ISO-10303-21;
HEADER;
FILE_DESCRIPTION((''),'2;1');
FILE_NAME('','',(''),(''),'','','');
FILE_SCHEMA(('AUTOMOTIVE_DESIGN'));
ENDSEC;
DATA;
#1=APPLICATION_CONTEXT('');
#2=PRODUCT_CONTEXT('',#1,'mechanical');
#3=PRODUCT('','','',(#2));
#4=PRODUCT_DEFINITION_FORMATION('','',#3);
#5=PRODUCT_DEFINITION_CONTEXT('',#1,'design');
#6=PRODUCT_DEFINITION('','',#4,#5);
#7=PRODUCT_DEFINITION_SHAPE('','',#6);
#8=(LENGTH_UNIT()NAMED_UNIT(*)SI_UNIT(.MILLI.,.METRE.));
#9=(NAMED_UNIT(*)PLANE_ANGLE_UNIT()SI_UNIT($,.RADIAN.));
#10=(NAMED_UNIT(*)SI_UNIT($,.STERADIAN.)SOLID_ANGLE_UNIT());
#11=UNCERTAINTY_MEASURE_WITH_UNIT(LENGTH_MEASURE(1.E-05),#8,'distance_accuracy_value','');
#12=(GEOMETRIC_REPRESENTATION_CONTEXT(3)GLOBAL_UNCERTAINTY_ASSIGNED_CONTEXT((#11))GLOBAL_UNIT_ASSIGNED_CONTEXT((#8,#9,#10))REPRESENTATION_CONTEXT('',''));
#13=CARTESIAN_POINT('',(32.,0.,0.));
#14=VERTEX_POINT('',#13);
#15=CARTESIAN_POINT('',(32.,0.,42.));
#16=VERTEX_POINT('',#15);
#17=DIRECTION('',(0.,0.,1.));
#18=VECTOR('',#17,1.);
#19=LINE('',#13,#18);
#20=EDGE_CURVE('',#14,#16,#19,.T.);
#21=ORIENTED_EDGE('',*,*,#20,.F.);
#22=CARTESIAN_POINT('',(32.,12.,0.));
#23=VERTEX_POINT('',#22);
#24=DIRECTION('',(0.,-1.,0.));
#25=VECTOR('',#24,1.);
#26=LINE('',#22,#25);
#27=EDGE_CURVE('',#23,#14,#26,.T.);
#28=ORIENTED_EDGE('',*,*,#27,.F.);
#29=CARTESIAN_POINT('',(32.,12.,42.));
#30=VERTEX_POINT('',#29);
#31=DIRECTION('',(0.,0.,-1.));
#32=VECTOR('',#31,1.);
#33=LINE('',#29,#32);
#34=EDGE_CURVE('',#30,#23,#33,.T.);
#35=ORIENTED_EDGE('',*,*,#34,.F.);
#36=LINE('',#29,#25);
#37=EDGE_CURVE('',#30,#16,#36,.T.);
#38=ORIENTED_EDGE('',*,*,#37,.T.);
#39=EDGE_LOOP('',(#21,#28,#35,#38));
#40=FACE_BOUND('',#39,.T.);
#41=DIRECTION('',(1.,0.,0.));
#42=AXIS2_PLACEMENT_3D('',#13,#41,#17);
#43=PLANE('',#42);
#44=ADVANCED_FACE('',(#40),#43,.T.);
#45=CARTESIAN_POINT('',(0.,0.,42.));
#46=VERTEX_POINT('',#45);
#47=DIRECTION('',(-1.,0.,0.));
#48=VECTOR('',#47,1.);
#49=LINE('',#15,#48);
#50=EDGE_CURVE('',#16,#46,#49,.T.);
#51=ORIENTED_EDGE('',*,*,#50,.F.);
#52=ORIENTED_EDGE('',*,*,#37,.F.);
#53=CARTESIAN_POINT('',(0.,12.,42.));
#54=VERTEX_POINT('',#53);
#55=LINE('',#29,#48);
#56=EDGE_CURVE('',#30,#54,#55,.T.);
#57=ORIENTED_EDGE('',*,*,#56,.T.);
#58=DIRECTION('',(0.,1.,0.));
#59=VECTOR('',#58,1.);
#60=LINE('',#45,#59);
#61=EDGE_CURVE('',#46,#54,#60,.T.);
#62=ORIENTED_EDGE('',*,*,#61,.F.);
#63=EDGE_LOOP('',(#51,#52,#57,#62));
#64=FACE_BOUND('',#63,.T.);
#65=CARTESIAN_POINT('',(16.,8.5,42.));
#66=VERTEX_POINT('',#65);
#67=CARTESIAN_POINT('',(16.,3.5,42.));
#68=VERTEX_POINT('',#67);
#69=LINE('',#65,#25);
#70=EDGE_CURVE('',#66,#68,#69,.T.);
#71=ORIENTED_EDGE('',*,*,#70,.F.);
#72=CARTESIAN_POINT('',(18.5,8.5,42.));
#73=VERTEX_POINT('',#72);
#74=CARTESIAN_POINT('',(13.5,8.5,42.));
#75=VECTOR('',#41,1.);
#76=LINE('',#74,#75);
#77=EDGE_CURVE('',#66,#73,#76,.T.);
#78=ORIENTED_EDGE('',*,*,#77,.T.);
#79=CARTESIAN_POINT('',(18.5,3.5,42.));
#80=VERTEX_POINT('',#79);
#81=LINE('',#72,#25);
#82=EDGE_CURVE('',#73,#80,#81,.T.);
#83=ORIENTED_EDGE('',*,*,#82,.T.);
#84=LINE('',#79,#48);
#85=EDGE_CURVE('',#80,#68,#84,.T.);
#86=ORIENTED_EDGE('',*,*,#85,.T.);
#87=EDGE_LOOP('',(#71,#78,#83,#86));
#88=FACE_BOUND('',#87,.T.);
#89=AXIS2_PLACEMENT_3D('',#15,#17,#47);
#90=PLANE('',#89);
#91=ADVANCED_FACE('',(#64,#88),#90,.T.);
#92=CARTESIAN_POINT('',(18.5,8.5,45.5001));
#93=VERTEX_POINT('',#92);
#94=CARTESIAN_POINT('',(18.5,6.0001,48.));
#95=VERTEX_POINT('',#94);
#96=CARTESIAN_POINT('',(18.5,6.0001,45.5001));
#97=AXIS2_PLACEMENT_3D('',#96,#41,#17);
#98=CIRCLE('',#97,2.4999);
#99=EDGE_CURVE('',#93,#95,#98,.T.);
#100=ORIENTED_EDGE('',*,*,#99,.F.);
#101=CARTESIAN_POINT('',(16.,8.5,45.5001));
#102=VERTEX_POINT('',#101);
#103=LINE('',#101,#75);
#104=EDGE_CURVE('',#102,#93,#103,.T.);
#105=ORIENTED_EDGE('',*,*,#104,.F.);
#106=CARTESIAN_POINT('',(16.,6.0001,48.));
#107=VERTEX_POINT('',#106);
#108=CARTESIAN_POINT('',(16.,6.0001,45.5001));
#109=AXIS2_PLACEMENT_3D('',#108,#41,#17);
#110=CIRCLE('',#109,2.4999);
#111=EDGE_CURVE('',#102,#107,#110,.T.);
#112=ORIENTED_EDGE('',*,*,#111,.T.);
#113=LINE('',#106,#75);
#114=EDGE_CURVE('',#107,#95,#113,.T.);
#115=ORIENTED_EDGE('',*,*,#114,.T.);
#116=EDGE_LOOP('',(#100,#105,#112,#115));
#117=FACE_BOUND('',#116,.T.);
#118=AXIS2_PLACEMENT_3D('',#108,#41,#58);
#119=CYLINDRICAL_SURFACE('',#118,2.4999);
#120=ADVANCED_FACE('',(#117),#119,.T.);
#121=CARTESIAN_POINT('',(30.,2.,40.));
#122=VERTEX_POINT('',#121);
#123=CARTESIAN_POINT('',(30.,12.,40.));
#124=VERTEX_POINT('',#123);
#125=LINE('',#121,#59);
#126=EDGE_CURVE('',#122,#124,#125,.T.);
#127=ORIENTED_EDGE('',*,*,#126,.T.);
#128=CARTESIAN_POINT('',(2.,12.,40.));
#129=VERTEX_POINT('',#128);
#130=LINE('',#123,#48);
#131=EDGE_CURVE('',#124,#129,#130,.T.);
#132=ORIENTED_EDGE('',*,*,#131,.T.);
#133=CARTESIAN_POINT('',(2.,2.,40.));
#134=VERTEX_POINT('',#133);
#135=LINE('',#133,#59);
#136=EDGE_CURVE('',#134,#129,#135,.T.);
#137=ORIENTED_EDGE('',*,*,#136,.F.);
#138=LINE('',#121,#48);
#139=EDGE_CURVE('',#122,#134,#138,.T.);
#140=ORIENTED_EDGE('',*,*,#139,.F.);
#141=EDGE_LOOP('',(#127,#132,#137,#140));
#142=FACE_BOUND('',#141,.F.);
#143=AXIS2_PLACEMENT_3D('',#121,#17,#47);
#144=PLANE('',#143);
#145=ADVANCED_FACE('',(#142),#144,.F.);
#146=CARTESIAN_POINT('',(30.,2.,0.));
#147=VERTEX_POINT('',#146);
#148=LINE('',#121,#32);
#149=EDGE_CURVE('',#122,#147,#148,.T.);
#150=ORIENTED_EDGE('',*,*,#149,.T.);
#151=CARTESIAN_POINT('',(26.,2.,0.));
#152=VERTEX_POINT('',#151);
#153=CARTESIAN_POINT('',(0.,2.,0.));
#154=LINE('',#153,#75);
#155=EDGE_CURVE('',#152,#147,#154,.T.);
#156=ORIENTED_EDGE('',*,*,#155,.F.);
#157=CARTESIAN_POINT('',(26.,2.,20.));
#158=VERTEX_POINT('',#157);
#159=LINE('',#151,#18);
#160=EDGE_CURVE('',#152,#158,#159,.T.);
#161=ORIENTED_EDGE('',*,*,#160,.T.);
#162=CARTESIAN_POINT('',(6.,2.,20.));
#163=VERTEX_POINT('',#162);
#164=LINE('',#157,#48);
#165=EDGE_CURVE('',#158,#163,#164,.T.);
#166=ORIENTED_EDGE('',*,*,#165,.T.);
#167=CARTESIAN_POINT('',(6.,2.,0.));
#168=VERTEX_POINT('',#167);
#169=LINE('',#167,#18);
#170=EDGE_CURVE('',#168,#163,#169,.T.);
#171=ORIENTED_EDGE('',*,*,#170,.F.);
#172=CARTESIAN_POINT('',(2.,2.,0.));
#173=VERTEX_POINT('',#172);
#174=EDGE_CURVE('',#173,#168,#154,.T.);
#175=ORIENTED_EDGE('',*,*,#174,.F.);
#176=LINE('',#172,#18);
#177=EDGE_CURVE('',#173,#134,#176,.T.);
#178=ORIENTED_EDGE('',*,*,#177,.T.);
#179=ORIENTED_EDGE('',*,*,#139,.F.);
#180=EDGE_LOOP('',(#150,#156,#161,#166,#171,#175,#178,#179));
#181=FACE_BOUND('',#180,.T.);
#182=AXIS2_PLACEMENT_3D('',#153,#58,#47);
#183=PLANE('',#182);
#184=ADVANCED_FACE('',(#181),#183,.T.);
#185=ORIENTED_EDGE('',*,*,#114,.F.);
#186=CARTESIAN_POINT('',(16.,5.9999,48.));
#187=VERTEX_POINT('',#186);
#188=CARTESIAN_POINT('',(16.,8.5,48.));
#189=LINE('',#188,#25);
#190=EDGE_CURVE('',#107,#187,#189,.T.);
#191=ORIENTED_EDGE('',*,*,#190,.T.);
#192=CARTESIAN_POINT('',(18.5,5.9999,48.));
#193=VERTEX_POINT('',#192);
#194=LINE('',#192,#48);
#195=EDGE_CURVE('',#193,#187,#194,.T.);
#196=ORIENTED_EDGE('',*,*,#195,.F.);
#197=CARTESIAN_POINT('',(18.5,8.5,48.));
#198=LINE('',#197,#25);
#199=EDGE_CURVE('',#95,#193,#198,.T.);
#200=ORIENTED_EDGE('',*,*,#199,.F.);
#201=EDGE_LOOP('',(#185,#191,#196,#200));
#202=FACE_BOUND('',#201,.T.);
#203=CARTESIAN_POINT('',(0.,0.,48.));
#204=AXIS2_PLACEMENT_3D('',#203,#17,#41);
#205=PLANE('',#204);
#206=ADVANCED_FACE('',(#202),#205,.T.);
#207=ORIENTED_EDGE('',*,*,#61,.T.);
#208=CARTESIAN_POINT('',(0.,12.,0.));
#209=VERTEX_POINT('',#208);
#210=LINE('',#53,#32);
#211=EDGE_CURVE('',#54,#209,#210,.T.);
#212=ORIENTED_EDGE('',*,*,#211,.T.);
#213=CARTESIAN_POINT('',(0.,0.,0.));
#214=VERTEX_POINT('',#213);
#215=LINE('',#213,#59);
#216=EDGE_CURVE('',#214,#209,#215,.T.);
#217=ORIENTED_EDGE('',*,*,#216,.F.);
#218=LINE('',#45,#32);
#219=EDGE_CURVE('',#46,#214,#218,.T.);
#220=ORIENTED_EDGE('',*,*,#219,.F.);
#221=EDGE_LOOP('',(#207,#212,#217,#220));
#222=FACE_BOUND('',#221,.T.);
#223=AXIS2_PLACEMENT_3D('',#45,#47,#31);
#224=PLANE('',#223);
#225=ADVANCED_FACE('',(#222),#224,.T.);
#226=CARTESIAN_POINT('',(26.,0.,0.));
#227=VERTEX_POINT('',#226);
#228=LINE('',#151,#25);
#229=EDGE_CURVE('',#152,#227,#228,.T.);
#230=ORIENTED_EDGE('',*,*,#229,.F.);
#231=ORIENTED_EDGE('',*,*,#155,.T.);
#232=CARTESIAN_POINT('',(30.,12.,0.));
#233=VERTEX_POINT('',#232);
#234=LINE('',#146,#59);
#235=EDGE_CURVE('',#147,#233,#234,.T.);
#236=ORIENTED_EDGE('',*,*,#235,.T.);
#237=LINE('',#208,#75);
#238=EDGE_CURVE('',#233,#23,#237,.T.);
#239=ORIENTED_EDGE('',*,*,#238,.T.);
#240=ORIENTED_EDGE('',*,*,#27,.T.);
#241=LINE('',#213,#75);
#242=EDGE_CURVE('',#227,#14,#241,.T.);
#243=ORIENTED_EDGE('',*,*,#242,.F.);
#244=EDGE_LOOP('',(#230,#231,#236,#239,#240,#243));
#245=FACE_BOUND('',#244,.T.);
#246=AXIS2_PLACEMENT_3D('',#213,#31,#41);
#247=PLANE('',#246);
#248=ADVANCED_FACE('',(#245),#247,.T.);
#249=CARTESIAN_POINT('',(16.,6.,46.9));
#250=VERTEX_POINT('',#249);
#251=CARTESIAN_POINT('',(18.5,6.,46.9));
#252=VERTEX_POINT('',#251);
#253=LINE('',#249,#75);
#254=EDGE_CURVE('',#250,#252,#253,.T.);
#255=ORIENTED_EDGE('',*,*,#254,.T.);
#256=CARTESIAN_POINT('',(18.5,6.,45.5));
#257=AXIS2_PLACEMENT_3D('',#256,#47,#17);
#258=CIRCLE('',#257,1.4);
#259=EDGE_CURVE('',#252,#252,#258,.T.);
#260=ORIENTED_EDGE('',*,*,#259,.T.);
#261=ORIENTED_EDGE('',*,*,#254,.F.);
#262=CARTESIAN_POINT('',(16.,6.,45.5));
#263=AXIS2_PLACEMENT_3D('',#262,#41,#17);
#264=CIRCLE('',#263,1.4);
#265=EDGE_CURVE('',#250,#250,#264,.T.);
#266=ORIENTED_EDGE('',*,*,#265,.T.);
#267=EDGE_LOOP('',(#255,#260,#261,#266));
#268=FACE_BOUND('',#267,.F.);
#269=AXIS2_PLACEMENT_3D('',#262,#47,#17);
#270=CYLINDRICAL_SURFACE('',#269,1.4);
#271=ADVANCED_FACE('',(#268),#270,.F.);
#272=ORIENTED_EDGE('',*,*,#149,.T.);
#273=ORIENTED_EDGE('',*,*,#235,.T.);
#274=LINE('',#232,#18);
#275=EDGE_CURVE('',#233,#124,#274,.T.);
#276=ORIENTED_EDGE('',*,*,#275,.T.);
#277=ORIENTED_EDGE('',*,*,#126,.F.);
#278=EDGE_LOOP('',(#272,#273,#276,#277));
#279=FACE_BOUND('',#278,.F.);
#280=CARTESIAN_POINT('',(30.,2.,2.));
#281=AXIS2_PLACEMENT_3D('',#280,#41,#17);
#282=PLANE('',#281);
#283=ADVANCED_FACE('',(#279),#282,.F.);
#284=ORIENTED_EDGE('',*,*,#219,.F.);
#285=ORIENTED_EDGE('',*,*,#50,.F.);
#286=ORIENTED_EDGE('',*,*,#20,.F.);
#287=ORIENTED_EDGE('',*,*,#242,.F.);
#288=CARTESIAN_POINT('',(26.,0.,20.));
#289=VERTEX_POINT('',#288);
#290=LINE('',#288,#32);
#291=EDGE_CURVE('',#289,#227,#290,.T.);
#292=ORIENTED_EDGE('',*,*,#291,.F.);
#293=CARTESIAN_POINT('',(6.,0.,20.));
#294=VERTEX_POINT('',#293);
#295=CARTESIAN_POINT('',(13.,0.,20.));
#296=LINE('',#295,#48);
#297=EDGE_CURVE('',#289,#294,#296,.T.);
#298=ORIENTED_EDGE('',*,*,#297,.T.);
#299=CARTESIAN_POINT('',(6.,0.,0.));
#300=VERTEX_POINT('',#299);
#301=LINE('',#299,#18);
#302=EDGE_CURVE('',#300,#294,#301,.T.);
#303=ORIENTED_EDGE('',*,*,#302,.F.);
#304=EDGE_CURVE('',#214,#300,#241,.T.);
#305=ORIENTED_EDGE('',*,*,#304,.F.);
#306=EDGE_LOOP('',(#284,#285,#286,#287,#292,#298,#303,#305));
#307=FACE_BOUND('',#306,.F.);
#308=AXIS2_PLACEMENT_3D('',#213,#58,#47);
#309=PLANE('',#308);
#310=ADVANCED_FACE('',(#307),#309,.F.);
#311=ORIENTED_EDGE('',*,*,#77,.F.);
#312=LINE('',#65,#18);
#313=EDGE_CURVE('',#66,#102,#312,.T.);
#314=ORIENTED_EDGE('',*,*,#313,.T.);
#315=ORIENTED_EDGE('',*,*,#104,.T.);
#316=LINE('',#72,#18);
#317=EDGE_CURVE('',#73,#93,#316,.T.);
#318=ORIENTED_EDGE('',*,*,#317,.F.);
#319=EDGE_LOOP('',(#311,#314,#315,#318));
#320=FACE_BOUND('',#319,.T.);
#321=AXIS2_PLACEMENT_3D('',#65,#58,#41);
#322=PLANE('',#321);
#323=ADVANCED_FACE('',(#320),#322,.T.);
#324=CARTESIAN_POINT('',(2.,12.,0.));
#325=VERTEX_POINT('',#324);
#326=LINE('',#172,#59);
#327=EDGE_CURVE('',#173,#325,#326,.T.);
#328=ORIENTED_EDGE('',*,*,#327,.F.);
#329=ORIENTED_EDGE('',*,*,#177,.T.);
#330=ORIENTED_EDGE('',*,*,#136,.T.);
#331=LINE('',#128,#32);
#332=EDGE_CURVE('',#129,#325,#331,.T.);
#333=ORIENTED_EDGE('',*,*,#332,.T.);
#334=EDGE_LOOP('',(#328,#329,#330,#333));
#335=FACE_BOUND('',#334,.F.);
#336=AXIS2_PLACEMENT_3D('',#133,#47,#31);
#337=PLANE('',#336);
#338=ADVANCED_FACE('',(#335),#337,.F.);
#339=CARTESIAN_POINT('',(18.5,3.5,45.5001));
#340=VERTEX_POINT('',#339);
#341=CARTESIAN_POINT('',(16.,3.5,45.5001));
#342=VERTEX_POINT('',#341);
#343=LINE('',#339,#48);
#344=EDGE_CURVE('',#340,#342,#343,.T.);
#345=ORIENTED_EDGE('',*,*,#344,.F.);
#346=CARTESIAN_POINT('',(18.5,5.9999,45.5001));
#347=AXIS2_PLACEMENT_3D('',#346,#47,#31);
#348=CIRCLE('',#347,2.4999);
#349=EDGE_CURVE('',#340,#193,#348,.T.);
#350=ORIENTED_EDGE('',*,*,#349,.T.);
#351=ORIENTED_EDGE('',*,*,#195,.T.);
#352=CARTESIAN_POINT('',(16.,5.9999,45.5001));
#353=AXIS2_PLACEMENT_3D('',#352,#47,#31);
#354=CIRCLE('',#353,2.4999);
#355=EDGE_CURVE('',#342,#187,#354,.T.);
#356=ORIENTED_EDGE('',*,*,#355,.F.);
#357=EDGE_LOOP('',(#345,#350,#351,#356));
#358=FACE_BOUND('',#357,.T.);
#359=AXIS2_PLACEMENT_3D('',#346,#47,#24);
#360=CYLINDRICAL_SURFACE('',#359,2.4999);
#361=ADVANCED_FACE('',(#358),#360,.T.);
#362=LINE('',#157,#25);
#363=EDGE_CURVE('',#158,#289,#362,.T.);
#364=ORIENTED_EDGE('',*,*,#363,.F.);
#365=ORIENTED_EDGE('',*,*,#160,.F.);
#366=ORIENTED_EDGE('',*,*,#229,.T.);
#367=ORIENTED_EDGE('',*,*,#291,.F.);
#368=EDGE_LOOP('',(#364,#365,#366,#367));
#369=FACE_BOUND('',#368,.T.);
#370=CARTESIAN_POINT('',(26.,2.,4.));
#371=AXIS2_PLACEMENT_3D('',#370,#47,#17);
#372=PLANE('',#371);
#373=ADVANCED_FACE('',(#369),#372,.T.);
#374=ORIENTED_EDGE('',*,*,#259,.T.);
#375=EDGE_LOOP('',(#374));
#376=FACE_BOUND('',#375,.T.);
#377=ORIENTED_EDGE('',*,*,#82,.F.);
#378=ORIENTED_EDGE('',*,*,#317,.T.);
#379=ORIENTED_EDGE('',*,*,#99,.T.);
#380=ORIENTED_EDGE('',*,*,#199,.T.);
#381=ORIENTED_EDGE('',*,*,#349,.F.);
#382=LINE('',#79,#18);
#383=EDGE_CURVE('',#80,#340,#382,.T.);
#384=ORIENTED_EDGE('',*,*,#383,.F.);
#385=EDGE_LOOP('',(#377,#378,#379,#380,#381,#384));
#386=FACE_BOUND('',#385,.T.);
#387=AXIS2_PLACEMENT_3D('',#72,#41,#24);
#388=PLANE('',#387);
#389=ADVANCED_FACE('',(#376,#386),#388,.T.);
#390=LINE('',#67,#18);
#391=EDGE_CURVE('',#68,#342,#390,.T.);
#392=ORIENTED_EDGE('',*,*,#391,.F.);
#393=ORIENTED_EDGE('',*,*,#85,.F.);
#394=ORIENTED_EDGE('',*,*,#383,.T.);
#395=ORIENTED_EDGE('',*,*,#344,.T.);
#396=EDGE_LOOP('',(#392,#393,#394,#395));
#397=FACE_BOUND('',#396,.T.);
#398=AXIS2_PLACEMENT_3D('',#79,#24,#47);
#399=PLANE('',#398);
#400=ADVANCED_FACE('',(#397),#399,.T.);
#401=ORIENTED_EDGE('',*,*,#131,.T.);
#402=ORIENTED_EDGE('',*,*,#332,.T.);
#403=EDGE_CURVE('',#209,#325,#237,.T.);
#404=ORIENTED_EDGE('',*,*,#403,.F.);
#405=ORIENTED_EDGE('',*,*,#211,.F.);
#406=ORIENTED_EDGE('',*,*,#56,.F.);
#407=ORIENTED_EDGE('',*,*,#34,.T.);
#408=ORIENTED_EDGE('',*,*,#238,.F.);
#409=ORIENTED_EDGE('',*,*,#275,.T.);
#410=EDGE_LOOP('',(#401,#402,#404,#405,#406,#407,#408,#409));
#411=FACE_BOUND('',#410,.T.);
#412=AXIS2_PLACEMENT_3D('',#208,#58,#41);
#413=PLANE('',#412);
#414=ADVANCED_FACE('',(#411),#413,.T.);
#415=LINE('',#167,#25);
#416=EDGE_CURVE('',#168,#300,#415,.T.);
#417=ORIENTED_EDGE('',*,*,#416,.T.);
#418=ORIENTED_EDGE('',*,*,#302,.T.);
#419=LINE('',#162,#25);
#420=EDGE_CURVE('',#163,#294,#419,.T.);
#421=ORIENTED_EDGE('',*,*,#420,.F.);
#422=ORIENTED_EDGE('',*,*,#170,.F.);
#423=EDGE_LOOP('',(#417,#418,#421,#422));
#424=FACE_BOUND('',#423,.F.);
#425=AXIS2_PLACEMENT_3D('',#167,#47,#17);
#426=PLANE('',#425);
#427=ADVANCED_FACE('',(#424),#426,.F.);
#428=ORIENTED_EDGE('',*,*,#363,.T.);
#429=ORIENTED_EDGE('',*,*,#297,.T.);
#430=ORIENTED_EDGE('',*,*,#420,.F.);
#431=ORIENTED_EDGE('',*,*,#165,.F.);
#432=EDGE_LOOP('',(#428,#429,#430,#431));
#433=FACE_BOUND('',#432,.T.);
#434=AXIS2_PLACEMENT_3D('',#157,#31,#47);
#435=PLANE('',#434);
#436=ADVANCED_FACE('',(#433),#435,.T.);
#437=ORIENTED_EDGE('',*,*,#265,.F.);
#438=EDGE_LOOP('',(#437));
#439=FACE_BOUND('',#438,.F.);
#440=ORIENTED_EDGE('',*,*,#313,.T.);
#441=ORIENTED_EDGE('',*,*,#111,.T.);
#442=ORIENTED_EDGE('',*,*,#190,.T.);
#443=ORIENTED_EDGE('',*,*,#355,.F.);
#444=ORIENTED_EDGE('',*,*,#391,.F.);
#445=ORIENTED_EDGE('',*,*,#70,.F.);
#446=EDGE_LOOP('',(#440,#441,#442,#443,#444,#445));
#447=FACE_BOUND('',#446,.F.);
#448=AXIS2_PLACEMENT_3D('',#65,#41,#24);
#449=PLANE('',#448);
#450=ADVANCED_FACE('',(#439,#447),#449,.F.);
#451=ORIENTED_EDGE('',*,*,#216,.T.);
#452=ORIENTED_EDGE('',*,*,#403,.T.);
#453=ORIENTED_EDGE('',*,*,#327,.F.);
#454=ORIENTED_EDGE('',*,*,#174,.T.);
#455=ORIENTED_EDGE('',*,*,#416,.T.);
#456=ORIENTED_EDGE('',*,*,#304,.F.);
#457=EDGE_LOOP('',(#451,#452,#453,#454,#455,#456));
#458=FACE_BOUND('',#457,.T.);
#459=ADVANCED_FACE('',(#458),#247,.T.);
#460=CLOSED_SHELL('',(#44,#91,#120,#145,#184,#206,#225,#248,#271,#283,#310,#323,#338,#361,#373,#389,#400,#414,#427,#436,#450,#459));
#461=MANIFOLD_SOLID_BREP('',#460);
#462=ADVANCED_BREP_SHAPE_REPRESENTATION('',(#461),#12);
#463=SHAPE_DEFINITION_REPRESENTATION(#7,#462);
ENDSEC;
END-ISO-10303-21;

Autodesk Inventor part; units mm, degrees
ref_plane "YZ Plane" through (0, 0, 0) normal (1, 0, 0) x (0, 1, 0)
ref_plane "XZ Plane" through (0, 0, 0) normal (0, 1, 0) x (-1, 0, 0)
ref_plane "XY Plane" through (0, 0, 0) normal (0, 0, 1) x (1, 0, 0)
sketch "Sketch1" plane through (0, 0, 0) normal (0, 1, 0) x (-1, 0, 0)
  line L0 (0, 0) -> (-32, 0)
  line L1 (-32, 0) -> (-32, 42)
  line L2 (-32, 42) -> (0, 42)
  line L3 (0, 42) -> (0, 0)
  dimension "d0" = 32
  dimension "d1" = 42
extrude "Extrusion1" add sketch "Sketch1" along normal blind 2
sketch "Sketch2" plane through (0, 2, 0) normal (0, 1, 0) x (1, 0, 0)
  line L0 (0, -42) -> (32, -42) projected
  line L1 (0, 0) -> (32, 0)
  line L2 (32, 0) -> (32, -42)
  line L3 (32, -42) -> (0, -42)
  line L4 (0, -42) -> (0, 0)
  line L5 (0, 0) -> (0, -42) projected
  line L6 (0, 0) -> (2, 0)
  line L7 (2, 0) -> (2, -2)
  line L8 (2, -2) -> (0, -2)
  line L9 (0, -2) -> (0, 0)
  line L10 (32, -42) -> (30, -42)
  line L11 (30, -42) -> (30, -40)
  line L12 (30, -40) -> (32, -40)
  line L13 (32, -40) -> (32, -42)
  line L14 (30, -40) -> (2, -40)
  line L15 (2, -40) -> (2, -2)
  line L16 (2, -2) -> (30, -2)
  line L17 (30, -2) -> (30, -40)
  line L18 (32, -42) -> (32, 0) projected
  line L19 (30, -2) -> (32, -2)
  line L20 (32, -2) -> (32, 0)
  line L21 (32, 0) -> (30, 0)
  line L22 (30, 0) -> (30, -2)
  dimension "d4" = 2
  dimension "d5" = 2
  dimension "d6" = 2
  dimension "d7" = 2
extrude "Extrusion2" add sketch "Sketch2" along normal blind 10 contours L4 L8 L15 L14 L11 L0 | L11 L12 L2 L0 | L4 L1 L7 L8 | L17 L19 L2 L12 | L22 L1 L2 L19
sketch "Sketch3" plane through (0, 2, 0) normal (0, 1, 0) x (1, 0, 0)
  line L0 (30, 0) -> (2, 0) projected
  line L1 (30, 0) -> (30, -40) projected
  line L2 (2, 0) -> (30, 0)
  line L3 (30, 0) -> (30, -40)
  line L4 (30, -40) -> (2, -40)
  line L5 (2, -40) -> (2, 0)
  line L6 (2, 0) -> (6, 0)
  line L7 (6, 0) -> (6, -4)
  line L8 (6, -4) -> (2, -4)
  line L9 (2, -4) -> (2, 0)
  line L10 (30, 0) -> (26, 0)
  line L11 (26, 0) -> (26, -4)
  line L12 (26, -4) -> (30, -4)
  line L13 (30, -4) -> (30, 0)
  line L14 (6, 0) -> (26, 0)
  line L15 (26, 0) -> (26, -20)
  line L16 (26, -20) -> (6, -20)
  line L17 (6, -20) -> (6, 0)
  point P0 (0, 0)
  dimension "d10" = 4
  dimension "d11" = 4
  dimension "d12" = 4
  dimension "d13" = 4
  dimension "d14" = 20
  dimension "d15" = 20
extrude "Extrusion3" cut sketch "Sketch3" against normal through all contours L11 L15 L16 L17 L7 L0
sketch "Sketch4" plane through (0, 0, 42) normal (0, 0, 1) x (1, 0, 0)
  line L0 (2, 12) -> (0, 12) projected
  line L1 (32, 0) -> (26, 0) projected
  line L2 (0, 12) -> (32, 12)
  line L3 (32, 12) -> (32, 0)
  line L4 (32, 0) -> (0, 0)
  line L5 (0, 0) -> (0, 12)
  line L6 (0, 12) -> (13.5, 12)
  line L7 (13.5, 12) -> (13.5, 8.5)
  line L8 (13.5, 8.5) -> (0, 8.5)
  line L9 (0, 8.5) -> (0, 12)
  line L10 (13.5, 8.5) -> (18.5, 8.5)
  line L11 (18.5, 8.5) -> (18.5, 3.5)
  line L12 (18.5, 3.5) -> (13.5, 3.5)
  line L13 (13.5, 3.5) -> (13.5, 8.5)
  line L14 (18.5, 8.5) -> (16, 8.5)
  line L15 (16, 8.5) -> (16, 3.5)
  line L16 (16, 3.5) -> (18.5, 3.5)
  line L17 (18.5, 3.5) -> (18.5, 8.5)
  dimension "d18" = 13.5
  dimension "d19" = 3.5
  dimension "d20" = 5
  dimension "d21" = 5
extrude "Extrusion4" add sketch "Sketch4" along normal blind 6 contours L10 L11 L12 L15
sketch "Sketch5" plane through (16, 3.5, 42) normal (-1, 0, 0) x (0, 0, 1)
  line L0 (6, 0) -> (6, 5) projected
  line L1 (6, 5) -> (3.5, 5)
  line L2 (3.5, 5) -> (3.5, 2.5)
  line L3 (3.5, 2.5) -> (6, 2.5)
  line L4 (6, 2.5) -> (6, 5)
  circle A0 centre (3.5, 2.5) radius 1.4
  point P0 (-42, -3.5)
  dimension "d24" = 2.5
  dimension "d25" = 2.5
  dimension "d26" = 2.8
extrude "Extrusion5" cut sketch "Sketch5" against normal through all contours A0 L2 L3 | L3 L2 A0
fillet "Fillet1" radius 2.5 2 edges at (17.25, 8.5, 48) (17.25, 3.5, 48)
properties part number "CAM04"
